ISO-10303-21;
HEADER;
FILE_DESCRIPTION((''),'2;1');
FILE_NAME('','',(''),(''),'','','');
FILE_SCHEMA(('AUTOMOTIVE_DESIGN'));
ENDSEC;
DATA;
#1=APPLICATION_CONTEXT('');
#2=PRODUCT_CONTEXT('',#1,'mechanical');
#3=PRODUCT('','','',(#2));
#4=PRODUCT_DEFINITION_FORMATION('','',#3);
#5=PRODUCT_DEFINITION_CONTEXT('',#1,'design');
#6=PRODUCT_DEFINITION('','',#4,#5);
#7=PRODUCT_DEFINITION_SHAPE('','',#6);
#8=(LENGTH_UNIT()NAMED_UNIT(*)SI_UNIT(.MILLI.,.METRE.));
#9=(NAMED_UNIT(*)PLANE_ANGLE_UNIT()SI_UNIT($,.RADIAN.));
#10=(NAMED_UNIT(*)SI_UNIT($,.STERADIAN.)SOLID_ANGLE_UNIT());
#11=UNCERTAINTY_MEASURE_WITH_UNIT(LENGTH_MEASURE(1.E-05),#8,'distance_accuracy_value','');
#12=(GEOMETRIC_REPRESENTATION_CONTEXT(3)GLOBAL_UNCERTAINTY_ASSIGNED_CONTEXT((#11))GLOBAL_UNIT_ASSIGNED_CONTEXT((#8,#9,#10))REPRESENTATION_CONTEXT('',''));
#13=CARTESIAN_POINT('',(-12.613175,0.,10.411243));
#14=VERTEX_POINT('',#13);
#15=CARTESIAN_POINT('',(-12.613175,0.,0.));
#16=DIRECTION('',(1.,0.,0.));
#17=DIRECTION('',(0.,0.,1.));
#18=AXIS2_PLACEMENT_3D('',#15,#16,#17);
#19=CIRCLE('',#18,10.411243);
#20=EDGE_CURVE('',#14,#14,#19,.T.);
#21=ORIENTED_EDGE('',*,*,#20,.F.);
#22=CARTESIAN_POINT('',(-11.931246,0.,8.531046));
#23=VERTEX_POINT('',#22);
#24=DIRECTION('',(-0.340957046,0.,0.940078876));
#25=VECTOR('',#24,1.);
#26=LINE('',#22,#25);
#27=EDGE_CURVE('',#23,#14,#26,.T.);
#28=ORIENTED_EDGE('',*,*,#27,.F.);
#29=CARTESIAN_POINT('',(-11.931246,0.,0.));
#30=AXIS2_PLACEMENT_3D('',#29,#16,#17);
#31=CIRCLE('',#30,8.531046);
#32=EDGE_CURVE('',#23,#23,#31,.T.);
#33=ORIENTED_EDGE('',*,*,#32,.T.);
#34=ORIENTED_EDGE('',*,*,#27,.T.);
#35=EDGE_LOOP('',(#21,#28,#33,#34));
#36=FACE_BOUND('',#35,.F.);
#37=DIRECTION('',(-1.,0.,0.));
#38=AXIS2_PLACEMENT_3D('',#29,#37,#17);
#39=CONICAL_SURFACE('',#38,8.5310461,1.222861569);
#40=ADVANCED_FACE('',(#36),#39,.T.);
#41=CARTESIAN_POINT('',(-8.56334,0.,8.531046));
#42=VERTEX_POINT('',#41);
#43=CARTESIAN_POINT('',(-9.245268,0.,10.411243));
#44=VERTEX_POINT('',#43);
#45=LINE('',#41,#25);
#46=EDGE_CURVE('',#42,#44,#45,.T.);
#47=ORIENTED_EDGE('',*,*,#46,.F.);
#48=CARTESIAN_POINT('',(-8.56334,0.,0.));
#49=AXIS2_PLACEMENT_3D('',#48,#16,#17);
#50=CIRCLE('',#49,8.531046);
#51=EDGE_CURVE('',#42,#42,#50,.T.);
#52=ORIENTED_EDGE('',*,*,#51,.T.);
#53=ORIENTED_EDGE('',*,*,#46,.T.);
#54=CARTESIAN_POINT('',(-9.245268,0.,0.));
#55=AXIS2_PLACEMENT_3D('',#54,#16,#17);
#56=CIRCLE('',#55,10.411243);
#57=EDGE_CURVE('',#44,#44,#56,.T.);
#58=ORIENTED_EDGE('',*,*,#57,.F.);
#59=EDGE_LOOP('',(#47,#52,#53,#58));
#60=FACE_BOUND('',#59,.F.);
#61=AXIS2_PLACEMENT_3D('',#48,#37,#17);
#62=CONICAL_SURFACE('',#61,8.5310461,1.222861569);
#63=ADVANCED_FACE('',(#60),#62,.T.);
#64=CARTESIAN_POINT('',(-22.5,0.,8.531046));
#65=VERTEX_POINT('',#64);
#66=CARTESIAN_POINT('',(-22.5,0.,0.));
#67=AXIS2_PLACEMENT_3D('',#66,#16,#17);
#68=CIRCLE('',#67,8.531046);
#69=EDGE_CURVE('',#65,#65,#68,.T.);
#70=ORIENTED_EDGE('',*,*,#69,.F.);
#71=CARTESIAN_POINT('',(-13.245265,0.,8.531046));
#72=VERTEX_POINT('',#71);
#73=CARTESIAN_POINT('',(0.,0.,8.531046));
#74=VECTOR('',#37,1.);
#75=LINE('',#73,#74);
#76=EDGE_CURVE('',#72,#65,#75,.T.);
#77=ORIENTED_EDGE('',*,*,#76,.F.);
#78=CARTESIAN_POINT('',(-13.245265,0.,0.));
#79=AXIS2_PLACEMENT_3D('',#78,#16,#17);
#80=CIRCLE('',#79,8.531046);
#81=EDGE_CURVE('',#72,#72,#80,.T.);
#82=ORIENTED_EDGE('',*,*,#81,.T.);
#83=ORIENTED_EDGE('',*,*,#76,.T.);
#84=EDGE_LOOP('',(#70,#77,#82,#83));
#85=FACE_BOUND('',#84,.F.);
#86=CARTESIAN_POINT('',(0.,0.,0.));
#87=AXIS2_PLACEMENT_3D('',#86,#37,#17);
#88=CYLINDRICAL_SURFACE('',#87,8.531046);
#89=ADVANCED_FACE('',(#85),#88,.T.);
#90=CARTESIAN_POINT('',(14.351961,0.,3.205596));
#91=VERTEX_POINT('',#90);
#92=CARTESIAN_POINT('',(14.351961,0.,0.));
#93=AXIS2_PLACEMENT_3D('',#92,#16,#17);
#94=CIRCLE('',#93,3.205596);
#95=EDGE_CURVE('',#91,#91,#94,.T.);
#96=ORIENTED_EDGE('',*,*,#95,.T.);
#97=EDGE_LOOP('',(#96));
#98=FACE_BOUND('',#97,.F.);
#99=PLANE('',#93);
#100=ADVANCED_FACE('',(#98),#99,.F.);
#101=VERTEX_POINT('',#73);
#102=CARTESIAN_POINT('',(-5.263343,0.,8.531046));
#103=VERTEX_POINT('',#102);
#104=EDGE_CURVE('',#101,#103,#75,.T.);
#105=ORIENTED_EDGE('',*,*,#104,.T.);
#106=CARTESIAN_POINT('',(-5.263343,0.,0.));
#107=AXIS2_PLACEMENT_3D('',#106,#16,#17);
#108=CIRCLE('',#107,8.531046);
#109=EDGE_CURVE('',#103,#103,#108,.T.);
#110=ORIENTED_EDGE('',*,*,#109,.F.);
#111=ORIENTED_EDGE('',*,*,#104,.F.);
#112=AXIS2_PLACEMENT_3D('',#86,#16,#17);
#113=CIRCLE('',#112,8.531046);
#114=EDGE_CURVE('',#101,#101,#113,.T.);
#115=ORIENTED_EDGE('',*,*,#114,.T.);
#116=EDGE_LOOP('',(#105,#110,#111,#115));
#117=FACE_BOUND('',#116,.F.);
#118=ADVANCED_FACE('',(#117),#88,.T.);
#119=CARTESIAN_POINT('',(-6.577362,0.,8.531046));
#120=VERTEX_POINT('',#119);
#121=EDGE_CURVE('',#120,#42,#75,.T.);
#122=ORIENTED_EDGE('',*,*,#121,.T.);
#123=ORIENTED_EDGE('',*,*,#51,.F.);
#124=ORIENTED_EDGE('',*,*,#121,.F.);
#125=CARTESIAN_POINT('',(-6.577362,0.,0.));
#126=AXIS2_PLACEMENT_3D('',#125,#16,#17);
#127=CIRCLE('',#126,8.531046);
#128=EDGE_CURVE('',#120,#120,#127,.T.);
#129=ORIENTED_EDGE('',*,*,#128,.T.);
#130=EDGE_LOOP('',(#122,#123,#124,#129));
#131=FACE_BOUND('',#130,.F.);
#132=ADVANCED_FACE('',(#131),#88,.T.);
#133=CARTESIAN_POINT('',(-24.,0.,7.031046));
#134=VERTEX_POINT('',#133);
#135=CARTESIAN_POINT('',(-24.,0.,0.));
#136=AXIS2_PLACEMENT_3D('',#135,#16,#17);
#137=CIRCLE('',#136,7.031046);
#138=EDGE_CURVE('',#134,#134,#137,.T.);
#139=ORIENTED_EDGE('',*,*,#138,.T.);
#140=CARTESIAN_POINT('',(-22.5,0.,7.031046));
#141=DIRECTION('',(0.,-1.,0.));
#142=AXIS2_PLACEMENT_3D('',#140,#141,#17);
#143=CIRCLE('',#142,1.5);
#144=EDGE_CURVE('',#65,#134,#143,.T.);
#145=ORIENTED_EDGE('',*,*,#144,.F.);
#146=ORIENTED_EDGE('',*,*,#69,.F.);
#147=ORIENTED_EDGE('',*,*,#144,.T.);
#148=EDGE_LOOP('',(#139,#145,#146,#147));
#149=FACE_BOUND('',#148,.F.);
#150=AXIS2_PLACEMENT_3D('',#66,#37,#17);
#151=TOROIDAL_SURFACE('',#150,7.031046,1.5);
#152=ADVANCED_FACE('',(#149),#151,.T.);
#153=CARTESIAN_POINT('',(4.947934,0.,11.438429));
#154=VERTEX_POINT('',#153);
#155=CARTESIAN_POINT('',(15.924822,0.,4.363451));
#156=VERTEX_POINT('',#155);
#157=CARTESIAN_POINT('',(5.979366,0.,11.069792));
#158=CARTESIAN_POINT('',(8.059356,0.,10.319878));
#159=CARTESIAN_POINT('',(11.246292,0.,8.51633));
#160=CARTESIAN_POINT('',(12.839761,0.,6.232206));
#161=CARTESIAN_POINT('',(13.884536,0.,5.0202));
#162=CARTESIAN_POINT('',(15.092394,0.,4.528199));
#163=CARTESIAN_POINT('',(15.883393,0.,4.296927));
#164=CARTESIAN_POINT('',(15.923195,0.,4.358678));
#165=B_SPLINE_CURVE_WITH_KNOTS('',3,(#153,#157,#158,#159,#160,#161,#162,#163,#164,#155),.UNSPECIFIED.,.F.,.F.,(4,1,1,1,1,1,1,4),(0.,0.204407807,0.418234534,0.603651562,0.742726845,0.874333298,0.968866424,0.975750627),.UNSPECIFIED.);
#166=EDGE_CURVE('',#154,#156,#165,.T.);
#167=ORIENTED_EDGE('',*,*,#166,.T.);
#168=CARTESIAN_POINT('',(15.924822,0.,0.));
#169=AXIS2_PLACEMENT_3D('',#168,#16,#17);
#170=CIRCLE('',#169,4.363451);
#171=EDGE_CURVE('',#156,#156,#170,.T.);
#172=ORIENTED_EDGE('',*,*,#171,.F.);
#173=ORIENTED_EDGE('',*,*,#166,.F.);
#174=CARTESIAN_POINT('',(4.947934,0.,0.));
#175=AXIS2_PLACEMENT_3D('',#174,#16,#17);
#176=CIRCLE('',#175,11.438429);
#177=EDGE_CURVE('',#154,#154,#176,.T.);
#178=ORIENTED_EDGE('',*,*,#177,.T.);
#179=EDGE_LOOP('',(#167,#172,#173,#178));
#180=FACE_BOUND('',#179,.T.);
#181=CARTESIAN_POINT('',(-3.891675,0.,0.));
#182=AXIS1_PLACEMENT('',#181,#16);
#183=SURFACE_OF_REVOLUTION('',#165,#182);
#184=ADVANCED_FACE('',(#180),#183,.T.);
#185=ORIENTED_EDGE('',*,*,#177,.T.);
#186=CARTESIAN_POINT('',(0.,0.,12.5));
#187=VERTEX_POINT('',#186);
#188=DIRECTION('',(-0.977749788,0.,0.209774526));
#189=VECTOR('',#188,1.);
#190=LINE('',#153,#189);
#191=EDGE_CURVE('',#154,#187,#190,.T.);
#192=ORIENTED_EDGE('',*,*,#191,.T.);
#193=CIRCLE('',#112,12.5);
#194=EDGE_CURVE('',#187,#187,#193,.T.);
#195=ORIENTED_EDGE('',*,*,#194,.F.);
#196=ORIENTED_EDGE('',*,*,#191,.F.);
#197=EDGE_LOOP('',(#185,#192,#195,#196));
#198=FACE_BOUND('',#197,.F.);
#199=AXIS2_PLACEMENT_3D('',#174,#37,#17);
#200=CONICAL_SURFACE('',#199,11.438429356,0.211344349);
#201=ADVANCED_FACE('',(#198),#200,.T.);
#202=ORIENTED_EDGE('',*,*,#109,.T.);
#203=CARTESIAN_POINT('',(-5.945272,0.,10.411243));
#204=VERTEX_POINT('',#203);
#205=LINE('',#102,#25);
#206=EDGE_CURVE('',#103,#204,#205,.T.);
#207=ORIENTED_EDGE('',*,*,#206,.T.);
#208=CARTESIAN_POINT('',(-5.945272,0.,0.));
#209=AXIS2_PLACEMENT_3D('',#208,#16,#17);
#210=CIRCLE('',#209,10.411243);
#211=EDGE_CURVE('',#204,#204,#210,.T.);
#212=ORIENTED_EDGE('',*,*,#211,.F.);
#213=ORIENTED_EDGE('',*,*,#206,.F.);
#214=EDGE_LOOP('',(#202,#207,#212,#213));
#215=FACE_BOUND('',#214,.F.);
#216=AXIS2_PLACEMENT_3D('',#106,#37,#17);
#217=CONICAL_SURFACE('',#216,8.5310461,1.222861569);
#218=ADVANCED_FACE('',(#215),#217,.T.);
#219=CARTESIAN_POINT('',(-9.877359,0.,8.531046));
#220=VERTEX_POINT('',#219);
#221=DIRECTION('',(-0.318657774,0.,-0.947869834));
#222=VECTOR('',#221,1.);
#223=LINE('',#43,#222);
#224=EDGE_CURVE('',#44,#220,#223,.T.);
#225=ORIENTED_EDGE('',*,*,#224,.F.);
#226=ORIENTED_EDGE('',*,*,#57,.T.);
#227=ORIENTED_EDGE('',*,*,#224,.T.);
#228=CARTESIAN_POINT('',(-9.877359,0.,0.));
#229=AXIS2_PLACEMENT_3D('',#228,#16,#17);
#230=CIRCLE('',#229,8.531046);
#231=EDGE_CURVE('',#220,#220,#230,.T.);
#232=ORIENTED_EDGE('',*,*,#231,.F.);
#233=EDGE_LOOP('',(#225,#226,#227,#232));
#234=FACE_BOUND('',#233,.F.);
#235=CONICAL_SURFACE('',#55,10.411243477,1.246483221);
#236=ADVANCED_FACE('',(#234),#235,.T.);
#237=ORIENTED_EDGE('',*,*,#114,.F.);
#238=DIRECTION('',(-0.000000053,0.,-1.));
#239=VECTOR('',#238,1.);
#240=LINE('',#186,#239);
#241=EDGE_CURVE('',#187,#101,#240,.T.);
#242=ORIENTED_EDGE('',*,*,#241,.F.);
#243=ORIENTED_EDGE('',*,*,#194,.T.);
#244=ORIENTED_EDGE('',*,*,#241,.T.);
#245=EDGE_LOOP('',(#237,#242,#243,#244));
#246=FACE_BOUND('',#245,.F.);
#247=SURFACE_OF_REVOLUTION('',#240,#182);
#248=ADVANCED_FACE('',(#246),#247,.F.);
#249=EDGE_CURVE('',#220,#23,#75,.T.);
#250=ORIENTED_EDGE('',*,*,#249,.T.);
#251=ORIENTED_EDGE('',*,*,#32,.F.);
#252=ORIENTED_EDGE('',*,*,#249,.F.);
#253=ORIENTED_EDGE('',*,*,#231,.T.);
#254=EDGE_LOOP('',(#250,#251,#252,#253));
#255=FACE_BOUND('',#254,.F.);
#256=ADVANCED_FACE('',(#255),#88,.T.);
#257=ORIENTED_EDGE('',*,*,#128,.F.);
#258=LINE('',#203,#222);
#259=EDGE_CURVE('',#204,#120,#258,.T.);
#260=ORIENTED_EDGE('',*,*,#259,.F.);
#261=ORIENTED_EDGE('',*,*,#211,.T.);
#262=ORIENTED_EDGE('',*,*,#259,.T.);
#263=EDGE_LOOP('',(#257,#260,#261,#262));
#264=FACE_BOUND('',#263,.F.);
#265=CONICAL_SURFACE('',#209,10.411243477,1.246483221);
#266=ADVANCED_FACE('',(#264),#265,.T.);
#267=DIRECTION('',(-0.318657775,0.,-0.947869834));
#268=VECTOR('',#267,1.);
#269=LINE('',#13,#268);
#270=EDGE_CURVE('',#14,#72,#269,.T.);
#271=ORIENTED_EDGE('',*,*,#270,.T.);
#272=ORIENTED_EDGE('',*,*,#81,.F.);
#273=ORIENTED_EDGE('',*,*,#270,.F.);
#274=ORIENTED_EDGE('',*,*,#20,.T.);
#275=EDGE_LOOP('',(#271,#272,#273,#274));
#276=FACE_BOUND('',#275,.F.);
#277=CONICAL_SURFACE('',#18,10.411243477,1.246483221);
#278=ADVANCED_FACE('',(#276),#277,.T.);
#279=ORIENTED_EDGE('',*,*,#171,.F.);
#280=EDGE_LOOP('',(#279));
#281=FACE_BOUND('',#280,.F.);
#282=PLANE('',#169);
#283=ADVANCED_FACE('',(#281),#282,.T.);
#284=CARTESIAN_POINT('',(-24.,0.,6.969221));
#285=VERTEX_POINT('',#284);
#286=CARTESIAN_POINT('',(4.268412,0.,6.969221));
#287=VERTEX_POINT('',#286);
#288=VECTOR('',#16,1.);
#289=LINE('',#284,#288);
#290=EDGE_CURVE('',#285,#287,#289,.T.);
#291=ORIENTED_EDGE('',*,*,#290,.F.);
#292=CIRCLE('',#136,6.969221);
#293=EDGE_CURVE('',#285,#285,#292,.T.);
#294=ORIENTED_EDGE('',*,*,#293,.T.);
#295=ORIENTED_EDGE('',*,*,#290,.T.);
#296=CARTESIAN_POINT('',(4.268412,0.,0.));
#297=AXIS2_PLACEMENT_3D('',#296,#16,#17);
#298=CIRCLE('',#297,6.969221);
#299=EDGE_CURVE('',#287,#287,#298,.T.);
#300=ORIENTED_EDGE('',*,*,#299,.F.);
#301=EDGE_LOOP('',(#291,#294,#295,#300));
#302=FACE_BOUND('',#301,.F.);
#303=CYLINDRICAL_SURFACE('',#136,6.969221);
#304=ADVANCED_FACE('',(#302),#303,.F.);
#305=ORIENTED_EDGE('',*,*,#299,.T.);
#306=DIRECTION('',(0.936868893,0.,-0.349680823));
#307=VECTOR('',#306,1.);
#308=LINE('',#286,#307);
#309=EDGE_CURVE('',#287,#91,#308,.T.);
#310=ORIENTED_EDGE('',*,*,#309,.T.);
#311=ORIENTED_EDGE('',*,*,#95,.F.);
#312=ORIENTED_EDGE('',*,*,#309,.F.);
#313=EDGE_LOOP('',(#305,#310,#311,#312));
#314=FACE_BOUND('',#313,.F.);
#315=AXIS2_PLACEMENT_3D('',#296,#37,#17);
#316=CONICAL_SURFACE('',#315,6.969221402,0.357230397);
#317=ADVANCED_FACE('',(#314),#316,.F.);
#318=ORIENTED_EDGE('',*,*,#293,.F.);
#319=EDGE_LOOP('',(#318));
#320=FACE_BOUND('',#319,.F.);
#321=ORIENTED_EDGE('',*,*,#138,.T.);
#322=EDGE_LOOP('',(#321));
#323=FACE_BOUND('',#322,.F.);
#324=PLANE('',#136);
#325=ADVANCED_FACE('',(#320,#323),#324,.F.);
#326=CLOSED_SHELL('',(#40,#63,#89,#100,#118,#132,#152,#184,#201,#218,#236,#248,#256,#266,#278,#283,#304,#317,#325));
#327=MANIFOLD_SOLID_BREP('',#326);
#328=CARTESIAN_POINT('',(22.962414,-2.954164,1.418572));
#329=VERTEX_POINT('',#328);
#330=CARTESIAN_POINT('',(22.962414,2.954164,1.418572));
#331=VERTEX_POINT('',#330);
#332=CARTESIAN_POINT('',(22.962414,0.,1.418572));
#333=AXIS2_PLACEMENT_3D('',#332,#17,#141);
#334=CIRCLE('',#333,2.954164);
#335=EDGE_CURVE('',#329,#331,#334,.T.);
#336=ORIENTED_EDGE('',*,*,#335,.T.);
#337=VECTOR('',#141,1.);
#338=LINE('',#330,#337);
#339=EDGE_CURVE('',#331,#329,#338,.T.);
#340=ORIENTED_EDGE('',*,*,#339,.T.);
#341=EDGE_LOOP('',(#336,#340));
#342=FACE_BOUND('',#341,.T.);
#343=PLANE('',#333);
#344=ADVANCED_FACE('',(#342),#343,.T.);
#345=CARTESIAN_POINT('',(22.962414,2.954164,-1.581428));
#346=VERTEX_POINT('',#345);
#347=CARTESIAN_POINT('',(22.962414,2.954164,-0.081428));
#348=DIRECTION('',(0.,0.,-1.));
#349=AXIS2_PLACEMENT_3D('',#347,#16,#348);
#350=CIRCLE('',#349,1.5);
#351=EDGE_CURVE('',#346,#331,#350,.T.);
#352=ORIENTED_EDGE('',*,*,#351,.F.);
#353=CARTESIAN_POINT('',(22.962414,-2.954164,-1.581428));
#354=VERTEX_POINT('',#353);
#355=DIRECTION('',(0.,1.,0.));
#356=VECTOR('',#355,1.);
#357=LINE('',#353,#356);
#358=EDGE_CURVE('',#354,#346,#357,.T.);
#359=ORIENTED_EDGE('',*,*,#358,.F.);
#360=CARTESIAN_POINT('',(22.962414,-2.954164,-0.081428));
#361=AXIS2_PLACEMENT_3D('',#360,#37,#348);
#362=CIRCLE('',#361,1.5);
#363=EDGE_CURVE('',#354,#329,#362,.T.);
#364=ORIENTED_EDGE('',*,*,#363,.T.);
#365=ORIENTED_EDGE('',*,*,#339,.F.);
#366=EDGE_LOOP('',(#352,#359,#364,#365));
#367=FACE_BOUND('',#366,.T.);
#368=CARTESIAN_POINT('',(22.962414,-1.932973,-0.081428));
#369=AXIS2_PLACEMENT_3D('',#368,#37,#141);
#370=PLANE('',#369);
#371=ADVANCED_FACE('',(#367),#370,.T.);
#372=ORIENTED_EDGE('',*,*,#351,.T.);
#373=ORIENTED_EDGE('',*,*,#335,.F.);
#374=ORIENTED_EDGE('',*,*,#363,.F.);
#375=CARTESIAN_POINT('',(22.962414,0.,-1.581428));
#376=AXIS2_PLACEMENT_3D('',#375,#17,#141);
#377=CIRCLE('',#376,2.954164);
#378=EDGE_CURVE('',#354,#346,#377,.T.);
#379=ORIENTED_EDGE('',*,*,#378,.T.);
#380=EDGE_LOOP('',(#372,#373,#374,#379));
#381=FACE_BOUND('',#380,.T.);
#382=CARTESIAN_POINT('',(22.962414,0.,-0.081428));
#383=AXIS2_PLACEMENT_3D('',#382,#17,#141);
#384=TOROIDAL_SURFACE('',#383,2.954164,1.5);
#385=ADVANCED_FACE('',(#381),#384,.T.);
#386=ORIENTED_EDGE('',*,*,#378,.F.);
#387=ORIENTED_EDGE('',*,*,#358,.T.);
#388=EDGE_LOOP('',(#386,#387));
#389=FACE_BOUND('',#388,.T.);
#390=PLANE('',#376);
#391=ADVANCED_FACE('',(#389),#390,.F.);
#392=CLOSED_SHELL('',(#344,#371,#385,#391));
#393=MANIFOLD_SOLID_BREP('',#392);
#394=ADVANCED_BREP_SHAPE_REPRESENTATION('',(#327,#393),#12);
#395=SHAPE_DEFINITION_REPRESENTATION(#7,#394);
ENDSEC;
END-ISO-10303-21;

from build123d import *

# Parameters (mm, degrees)
F3_ANGLE_BACK = 90
F3_ANGLE      = 180
F5_R          = 1.5


# Not quite as in the source:
# - the program builds the solid bodies; features that only make, move or delete a surface that nothing else refers to are left out


with BuildPart() as f1:
    # F0 (on Front) → F1 (revolve)
    with BuildSketch(Plane.XZ):
        Polygon((-6.5773623064, 8.5310461), (-5.2633433491, 8.5310461), (-5.9452718124, 10.4112434772), align=None)
        with BuildLine():
            Line((0, 12.5), (-2.086e-07, 8.5310461))
            Line((-2.086e-07, 8.5310461), (-5.2633433491, 8.5310461))
            Line((-5.2633433491, 8.5310461), (-6.5773623064, 8.5310461))
            Line((-6.5773623064, 8.5310461), (-8.5633396059, 8.5310461))
            Line((-8.5633396059, 8.5310461), (-9.8773585632, 8.5310461))
            Line((-9.8773585632, 8.5310461), (-11.9312460423, 8.5310461))
            Line((-11.9312460423, 8.5310461), (-13.2452649996, 8.5310461))
            Line((-13.2452649996, 8.5310461), (-24.0000002086, 8.5310461))
            Line((-24.0000002086, 8.5310461), (-24.0000002086, 6.969221402))
            Line((-24.0000002086, 6.969221402), (4.2684120126, 6.969221402))
            Line((4.2684120126, 6.969221402), (14.3519612029, 3.2055957709))
            Line((14.3519612029, 3.2055957709), (14.3519612029, 0))
            Line((14.3519612029, 0), (15.9248222774, 0))
            Line((15.9248222774, 0), (15.9248222774, 4.3634505053))
            add(Edge.make_bspline(
                [(4.947933834, 11.4384293556), (5.9793661215, 11.0697915829), (8.0593561798, 10.3198783934), (11.2462916486, 8.5163300937), (12.8397611568, 6.2322058814), (13.8845362692, 5.0202002888), (15.0923938592, 4.5281993111), (15.8833928624, 4.2969274606), (15.9231948476, 4.3586775517), (15.9248222774, 4.3634505053)],
                knots=[0, 0, 0, 0, 0.204407807, 0.4182345345, 0.6036515616, 0.742726845, 0.8743332982, 0.9688664238, 0.9757506271, 0.9757506271, 0.9757506271, 0.9757506271], degree=3))
            Line((4.947933834, 11.4384293556), (0, 12.5))
        make_face()
        Polygon((-9.8773585632, 8.5310461), (-8.5633396059, 8.5310461), (-9.2452680692, 10.4112434772), align=None)
        Polygon((-13.2452649996, 8.5310461), (-11.9312460423, 8.5310461), (-12.6131745055, 10.4112434772), align=None)
    revolve(axis=Axis((-3.8916748017, 0, 0), (1, 0, 0)))

    # F5
    f5_edges = [f1.edges().sort_by_distance(p)[0] for p in [
        (-24, 0, -8.531046),
    ]]
    fillet(f5_edges, radius=F5_R)


with BuildPart() as f3:
    # F2 (on Front) → F3 (revolve)
    with BuildSketch(Plane.XZ, mode=Mode.PRIVATE) as f3_sk:
        with BuildLine():
            Line((22.9624137282, 1.4185722424), (22.9624137282, -1.5814277576))
            Line((22.9624137282, -1.5814277576), (25.9165772951, -1.5814277576))
            ThreePointArc((25.9165772951, -1.5814277576), (27.4165772951, -0.0814277576), (25.9165772951, 1.4185722424))
            Line((25.9165772951, 1.4185722424), (22.9624137282, 1.4185722424))
        make_face()
    revolve(f3_sk.sketch.rotate(Axis((22.9624137282, 0, -0.0814277576), (0, 0, 1)), -F3_ANGLE_BACK), axis=Axis((22.9624137282, 0, -0.0814277576), (0, 0, 1)), revolution_arc=F3_ANGLE)


solid = Compound([f1.part, f3.part])
